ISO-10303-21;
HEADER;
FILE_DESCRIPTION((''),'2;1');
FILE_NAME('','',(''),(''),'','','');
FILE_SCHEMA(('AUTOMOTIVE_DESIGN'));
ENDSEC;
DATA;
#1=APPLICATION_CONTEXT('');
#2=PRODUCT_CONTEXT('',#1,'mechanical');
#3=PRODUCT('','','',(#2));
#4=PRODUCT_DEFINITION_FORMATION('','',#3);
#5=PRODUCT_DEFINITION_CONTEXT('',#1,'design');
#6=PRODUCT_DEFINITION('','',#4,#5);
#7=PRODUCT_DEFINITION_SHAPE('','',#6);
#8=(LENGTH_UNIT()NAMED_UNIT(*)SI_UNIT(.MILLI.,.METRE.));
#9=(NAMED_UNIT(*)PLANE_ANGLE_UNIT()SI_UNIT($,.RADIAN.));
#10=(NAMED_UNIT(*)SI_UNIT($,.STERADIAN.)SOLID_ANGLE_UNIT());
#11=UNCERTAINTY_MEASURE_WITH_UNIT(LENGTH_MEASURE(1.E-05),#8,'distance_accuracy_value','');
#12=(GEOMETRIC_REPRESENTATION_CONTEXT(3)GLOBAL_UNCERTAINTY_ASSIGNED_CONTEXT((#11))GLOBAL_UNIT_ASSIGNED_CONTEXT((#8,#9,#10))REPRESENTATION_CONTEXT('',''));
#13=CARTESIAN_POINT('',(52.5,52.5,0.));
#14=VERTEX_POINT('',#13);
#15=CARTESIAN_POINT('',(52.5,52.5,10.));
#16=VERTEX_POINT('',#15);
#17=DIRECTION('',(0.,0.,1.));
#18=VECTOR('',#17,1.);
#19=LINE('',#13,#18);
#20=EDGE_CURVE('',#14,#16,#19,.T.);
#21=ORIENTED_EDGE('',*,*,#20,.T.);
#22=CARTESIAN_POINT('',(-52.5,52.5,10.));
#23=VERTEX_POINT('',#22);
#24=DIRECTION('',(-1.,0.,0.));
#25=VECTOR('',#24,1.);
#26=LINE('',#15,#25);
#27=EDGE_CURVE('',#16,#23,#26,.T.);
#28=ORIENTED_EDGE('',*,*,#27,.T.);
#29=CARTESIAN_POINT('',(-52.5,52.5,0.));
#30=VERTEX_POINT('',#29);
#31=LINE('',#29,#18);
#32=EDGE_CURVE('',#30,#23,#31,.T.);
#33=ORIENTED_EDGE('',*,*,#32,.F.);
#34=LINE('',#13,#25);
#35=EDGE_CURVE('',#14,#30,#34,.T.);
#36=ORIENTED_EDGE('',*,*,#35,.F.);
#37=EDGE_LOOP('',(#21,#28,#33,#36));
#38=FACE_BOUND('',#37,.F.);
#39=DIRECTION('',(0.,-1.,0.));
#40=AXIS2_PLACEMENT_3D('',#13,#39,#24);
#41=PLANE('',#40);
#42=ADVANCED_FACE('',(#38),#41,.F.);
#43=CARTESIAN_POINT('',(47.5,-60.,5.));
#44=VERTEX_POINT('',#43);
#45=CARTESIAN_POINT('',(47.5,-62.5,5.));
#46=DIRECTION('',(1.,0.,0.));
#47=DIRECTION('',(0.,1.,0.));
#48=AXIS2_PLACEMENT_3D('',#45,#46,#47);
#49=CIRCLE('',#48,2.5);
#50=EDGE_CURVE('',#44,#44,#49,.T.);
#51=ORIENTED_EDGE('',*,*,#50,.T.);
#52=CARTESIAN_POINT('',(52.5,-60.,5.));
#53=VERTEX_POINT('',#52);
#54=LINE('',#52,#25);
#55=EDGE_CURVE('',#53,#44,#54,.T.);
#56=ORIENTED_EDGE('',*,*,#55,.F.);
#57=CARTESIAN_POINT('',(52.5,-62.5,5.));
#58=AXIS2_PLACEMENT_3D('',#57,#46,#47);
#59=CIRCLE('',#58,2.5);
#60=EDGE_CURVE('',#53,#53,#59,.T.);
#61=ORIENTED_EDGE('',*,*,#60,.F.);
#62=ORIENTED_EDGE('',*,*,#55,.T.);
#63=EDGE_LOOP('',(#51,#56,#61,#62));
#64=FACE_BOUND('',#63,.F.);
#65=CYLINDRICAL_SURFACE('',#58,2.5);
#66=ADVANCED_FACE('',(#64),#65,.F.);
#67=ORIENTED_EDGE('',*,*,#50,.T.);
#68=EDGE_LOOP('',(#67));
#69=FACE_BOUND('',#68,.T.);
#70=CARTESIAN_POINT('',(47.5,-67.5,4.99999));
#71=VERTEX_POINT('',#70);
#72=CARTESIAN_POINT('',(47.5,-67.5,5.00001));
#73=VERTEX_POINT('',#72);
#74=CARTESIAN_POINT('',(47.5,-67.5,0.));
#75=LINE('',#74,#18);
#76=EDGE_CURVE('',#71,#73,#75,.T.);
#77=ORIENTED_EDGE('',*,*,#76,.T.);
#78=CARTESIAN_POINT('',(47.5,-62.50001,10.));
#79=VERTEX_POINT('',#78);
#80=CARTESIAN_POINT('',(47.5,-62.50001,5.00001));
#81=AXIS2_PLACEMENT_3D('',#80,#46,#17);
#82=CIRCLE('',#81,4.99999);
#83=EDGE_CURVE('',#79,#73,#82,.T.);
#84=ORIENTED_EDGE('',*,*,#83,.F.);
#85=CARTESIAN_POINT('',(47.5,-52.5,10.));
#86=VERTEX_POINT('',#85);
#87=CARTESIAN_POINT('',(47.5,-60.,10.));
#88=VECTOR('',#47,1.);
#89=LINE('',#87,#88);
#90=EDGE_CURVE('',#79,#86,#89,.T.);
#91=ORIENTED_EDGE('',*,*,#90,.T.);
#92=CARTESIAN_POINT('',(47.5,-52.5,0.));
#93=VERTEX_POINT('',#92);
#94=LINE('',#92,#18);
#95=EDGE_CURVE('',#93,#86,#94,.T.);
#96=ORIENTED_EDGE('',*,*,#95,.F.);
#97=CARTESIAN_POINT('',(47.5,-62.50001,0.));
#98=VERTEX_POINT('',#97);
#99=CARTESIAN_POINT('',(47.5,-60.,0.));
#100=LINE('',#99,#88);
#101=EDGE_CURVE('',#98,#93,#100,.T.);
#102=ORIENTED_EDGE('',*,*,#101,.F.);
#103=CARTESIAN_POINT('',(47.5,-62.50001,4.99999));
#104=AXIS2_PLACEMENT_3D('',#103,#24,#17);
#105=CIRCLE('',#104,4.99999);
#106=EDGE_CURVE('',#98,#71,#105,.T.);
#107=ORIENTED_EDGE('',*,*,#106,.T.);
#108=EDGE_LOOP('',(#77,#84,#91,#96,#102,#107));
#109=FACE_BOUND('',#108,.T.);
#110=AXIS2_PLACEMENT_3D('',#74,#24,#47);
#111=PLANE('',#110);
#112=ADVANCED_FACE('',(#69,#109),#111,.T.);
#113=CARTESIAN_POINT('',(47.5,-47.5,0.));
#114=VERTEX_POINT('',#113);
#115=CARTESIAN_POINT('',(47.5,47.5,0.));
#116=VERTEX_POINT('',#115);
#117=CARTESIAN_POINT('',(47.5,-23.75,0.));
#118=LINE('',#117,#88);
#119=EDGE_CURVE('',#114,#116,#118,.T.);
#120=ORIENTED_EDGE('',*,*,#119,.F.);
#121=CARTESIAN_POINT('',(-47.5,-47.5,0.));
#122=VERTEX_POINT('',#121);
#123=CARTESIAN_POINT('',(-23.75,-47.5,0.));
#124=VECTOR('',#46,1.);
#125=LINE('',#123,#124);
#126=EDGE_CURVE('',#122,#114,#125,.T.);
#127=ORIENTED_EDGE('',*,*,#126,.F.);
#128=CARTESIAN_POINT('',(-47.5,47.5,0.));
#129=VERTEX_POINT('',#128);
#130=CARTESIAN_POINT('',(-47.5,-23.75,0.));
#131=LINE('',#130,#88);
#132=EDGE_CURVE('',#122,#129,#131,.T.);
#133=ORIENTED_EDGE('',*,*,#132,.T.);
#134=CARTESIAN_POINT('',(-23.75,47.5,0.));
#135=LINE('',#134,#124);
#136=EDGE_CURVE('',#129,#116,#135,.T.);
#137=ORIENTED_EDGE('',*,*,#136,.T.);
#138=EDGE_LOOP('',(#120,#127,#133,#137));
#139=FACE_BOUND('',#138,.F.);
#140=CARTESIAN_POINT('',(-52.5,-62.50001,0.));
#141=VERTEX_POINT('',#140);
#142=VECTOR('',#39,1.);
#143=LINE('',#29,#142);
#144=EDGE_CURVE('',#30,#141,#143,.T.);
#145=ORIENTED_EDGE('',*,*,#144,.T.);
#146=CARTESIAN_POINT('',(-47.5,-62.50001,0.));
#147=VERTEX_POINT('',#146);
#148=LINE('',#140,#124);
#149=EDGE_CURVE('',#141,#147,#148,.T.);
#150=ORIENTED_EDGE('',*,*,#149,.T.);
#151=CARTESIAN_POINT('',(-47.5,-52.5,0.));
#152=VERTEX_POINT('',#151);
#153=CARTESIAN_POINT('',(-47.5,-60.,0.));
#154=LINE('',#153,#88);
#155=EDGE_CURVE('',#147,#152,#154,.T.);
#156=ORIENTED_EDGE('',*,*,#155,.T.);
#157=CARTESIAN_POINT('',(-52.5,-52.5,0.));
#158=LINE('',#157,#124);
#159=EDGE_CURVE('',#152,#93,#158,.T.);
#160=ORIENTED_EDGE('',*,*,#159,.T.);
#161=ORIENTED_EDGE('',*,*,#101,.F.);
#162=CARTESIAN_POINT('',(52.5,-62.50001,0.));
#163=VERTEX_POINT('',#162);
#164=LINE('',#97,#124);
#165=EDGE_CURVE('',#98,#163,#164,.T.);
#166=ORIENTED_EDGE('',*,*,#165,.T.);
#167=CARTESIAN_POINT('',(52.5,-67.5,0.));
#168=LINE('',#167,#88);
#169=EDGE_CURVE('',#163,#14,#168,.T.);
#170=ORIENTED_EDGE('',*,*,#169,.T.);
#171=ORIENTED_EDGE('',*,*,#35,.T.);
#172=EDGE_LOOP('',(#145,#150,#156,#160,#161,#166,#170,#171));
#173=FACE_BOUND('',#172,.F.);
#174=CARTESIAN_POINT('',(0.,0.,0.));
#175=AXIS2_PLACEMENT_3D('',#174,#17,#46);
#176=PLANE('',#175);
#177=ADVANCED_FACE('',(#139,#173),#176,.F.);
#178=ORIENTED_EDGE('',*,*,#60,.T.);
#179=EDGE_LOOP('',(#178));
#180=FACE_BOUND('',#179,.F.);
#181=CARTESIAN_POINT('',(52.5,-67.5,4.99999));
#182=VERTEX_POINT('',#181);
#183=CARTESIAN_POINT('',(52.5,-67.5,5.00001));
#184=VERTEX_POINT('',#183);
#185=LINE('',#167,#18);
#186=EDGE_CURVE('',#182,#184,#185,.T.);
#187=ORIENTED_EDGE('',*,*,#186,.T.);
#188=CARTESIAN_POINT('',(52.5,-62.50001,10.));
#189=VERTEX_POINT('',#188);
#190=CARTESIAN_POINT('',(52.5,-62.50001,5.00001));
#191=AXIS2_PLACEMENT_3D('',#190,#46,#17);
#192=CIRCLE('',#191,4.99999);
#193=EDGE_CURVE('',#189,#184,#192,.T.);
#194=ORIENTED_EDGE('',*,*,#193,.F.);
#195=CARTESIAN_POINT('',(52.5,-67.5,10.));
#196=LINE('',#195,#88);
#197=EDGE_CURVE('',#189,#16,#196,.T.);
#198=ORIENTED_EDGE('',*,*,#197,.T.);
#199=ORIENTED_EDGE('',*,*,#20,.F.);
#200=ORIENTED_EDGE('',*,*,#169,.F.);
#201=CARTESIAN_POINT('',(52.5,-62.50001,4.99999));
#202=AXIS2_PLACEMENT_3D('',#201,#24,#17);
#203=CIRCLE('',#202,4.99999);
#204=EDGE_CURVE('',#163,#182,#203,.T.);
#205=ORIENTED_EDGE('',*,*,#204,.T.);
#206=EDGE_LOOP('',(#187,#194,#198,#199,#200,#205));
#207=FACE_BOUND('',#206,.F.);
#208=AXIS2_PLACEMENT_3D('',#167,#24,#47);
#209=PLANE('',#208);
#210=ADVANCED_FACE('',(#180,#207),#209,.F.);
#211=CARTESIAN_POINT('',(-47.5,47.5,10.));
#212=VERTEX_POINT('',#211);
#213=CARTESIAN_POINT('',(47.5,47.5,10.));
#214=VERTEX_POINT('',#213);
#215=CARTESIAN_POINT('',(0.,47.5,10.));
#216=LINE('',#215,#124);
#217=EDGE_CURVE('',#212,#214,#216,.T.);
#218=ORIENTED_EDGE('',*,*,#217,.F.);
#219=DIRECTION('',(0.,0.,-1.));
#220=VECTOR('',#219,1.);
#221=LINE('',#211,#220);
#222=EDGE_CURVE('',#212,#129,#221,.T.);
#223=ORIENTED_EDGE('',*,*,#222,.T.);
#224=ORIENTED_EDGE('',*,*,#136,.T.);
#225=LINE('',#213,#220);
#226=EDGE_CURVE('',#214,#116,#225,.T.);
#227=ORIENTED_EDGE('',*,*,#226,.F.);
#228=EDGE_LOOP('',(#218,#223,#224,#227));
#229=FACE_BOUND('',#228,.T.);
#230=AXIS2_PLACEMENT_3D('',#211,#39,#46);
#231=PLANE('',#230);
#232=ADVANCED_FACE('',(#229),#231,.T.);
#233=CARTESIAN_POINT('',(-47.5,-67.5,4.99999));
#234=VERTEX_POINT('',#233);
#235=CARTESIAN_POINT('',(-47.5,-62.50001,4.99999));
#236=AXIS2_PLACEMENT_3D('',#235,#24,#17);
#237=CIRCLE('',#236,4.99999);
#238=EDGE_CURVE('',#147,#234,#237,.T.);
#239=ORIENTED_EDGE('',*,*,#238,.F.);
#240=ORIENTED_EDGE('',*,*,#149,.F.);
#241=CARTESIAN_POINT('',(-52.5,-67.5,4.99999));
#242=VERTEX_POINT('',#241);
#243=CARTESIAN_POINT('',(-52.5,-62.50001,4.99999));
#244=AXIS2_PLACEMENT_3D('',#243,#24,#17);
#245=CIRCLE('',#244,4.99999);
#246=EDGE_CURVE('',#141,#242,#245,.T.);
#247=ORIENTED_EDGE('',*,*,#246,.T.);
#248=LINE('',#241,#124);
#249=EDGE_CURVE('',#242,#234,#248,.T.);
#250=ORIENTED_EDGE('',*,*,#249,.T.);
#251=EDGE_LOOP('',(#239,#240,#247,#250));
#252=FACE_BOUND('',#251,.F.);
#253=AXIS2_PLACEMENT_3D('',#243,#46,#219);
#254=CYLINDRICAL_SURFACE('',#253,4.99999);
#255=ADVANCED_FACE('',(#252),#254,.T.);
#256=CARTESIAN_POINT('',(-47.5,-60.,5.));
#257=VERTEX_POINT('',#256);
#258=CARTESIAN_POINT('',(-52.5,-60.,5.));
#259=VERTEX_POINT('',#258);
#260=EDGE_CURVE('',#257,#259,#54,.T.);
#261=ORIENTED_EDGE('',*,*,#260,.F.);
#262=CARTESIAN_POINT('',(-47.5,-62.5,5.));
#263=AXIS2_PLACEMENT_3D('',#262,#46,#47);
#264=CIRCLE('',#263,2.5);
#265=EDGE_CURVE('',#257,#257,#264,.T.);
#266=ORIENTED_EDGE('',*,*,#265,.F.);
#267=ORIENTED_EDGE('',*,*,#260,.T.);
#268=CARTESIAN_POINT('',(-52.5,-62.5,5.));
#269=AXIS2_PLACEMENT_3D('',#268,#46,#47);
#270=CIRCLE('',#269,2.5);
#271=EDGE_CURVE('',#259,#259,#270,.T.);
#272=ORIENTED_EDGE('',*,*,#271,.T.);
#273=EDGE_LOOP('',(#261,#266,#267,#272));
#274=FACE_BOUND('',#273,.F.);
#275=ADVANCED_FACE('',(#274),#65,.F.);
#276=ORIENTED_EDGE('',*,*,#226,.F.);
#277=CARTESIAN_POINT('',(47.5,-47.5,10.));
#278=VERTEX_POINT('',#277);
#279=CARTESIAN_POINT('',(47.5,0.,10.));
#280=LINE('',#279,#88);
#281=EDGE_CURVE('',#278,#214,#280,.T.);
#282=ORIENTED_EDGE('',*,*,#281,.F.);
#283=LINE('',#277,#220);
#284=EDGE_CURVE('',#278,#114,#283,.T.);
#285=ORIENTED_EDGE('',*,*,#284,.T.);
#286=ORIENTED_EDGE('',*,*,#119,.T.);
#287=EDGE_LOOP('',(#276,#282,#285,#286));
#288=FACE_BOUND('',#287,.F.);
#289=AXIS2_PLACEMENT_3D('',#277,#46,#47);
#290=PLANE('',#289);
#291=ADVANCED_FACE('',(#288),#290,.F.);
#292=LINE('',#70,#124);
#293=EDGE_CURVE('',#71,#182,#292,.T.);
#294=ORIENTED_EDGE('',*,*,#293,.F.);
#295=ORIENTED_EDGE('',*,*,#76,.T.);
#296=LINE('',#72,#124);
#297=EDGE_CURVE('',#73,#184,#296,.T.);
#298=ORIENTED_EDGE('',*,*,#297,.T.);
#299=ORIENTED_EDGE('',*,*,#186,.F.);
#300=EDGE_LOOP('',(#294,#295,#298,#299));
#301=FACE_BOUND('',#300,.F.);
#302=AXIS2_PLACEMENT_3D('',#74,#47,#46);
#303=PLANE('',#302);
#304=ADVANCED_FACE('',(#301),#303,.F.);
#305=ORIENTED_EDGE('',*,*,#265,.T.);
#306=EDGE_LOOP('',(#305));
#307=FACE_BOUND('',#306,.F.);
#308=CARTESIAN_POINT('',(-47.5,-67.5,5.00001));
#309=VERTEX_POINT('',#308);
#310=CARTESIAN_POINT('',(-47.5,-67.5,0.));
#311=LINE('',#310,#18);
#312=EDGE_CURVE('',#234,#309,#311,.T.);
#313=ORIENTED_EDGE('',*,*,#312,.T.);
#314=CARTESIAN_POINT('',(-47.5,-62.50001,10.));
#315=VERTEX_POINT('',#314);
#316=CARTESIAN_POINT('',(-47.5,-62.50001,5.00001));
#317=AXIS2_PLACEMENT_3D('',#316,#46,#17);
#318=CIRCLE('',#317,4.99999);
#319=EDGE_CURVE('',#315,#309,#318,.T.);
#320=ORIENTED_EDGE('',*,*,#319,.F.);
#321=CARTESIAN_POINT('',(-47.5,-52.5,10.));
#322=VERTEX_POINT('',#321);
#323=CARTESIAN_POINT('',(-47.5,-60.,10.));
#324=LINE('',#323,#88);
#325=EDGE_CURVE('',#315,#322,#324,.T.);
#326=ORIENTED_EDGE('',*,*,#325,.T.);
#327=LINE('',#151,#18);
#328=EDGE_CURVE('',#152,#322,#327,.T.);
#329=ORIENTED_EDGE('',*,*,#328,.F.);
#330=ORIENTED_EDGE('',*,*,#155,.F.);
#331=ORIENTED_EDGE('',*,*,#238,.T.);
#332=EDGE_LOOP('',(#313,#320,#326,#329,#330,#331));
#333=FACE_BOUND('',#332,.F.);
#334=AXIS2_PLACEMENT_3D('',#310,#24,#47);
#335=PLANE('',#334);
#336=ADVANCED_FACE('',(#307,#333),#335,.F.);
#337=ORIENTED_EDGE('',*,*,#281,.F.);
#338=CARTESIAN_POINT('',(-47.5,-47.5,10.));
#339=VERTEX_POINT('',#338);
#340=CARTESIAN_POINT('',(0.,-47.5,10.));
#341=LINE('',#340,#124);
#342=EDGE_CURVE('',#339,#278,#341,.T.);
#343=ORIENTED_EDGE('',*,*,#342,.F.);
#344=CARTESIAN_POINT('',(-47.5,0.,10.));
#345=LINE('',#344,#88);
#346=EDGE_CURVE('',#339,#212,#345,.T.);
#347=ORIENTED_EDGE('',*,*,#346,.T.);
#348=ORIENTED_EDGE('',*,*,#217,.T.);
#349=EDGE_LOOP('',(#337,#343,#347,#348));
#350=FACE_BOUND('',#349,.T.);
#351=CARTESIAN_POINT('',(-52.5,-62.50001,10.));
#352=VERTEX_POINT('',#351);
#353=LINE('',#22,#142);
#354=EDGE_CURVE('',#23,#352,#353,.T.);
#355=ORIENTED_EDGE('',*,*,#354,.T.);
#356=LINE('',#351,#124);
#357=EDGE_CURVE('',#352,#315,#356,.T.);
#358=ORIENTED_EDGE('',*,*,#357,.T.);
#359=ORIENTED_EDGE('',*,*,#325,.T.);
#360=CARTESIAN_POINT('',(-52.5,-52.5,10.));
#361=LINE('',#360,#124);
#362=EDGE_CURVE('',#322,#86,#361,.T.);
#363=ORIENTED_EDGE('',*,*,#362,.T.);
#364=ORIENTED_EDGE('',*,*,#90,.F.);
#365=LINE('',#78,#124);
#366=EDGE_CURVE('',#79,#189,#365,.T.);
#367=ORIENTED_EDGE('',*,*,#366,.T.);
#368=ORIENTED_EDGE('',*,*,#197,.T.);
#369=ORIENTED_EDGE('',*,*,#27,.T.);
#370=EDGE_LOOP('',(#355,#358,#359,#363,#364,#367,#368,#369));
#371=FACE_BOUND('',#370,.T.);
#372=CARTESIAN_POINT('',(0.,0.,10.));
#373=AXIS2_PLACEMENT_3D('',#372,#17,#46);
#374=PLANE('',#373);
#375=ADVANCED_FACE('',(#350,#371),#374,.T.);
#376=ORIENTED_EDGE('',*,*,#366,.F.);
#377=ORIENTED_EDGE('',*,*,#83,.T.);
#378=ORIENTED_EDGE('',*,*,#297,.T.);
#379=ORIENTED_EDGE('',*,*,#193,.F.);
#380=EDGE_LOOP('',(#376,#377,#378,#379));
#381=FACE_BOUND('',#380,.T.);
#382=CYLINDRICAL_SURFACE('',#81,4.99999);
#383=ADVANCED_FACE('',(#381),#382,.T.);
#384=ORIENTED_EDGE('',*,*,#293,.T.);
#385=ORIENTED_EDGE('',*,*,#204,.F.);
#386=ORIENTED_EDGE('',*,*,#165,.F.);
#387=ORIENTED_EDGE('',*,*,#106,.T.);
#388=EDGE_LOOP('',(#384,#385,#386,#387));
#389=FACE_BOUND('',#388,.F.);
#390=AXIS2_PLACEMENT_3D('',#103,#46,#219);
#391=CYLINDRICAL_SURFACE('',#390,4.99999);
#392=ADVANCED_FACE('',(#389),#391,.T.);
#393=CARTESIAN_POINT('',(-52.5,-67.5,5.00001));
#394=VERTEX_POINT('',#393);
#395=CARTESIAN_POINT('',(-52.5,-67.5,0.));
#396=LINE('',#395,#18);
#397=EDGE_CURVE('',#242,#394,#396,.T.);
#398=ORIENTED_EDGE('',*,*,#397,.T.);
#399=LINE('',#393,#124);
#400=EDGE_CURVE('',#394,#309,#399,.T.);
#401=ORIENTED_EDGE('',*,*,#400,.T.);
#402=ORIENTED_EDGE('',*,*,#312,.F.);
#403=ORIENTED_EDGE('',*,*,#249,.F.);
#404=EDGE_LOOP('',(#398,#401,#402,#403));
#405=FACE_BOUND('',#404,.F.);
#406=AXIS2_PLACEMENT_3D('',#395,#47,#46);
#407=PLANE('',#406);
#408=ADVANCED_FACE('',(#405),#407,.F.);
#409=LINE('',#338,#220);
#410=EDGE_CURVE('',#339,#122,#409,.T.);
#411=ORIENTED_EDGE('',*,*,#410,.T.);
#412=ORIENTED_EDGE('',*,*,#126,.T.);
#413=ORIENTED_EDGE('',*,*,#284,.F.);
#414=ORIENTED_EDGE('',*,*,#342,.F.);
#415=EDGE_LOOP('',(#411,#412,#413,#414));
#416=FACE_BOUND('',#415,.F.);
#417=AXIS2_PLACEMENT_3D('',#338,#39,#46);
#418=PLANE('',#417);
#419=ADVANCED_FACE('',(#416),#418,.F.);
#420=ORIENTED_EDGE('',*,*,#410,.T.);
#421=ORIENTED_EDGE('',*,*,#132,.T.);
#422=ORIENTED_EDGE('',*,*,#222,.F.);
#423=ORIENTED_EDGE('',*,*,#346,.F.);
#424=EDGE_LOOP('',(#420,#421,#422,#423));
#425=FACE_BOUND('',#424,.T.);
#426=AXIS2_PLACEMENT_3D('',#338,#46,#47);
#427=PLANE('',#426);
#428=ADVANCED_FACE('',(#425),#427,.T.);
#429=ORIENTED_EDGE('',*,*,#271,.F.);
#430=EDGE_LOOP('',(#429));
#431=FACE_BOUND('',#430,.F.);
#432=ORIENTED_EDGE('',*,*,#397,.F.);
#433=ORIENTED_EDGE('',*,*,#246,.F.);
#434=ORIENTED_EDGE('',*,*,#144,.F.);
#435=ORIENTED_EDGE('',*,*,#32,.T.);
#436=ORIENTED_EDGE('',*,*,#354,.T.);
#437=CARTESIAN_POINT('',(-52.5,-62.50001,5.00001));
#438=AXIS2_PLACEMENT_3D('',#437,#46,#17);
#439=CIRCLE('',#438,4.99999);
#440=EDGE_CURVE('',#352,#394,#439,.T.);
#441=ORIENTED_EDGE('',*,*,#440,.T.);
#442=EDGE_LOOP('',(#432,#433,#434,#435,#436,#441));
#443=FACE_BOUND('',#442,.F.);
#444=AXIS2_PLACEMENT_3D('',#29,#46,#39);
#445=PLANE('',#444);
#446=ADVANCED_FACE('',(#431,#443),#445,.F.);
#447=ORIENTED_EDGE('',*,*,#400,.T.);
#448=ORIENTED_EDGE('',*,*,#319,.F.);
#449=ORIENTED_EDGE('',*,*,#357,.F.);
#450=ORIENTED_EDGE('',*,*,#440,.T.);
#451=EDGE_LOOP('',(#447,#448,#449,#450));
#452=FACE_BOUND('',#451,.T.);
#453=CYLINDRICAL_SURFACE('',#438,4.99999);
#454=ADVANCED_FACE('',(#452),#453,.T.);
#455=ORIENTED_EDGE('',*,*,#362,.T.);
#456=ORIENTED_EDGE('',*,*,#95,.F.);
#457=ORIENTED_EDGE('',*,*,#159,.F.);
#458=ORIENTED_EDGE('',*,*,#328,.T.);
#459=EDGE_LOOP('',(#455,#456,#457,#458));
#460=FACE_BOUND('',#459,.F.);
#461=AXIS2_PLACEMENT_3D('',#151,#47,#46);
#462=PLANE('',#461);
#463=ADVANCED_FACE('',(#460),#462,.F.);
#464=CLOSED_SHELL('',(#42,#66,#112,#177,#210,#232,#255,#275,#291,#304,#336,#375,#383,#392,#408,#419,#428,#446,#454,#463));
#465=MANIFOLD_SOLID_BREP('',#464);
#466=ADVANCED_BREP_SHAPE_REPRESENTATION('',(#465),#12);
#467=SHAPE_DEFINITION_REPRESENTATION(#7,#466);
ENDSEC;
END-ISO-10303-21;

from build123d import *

# Parameters (mm, degrees)
F0_W     = 5
F0_H     = 15
F1_DEPTH = 10
F2_R     = 2.5
F3_DEPTH = 105.001
F4_R     = 4.99999
F5_W     = 95
F5_H     = 95
F6_DEPTH = 10.001


# Not quite as in the source:
# - a fillet or chamfer is up to 0.001 mm smaller than in the source, because OpenCascade refuses the exact size


with BuildPart() as f1:
    # F0 (on Top) → F1 (new body)
    with BuildSketch(Plane.XY):
        Polygon((52.5, 52.5), (-52.5, 52.5), (-52.5, -52.5), (-47.5, -52.5), (47.5, -52.5), (52.5, -52.5), align=None)
        with Locations((-50, -60)):
            Rectangle(F0_W, F0_H)
        with Locations((50, -60)):
            Rectangle(F0_W, F0_H)
    extrude(amount=F1_DEPTH)

    # F2 (on face) → F3 (cut, through all)
    with BuildSketch(Plane.YZ.offset(52.5)):
        with Locations((-62.5, 5)):
            Circle(F2_R)
    extrude(amount=-F3_DEPTH, mode=Mode.SUBTRACT)

    # F4 (radius 5 in the source; OpenCascade refuses exactly that, so slightly less here)
    f4_edges = [f1.edges().sort_by_distance(p)[0] for p in [
        (-50, -67.5, 10),
        (-50, -67.5, 0),
        (50, -67.5, 10),
        (50, -67.5, 0),
    ]]
    fillet(f4_edges, radius=F4_R)

    # F5 (on face) → F6 (cut, through all)
    with BuildSketch(Plane.XY.offset(10)):
        Rectangle(F5_W, F5_H)
    extrude(amount=-F6_DEPTH, mode=Mode.SUBTRACT)


solid = f1.part
